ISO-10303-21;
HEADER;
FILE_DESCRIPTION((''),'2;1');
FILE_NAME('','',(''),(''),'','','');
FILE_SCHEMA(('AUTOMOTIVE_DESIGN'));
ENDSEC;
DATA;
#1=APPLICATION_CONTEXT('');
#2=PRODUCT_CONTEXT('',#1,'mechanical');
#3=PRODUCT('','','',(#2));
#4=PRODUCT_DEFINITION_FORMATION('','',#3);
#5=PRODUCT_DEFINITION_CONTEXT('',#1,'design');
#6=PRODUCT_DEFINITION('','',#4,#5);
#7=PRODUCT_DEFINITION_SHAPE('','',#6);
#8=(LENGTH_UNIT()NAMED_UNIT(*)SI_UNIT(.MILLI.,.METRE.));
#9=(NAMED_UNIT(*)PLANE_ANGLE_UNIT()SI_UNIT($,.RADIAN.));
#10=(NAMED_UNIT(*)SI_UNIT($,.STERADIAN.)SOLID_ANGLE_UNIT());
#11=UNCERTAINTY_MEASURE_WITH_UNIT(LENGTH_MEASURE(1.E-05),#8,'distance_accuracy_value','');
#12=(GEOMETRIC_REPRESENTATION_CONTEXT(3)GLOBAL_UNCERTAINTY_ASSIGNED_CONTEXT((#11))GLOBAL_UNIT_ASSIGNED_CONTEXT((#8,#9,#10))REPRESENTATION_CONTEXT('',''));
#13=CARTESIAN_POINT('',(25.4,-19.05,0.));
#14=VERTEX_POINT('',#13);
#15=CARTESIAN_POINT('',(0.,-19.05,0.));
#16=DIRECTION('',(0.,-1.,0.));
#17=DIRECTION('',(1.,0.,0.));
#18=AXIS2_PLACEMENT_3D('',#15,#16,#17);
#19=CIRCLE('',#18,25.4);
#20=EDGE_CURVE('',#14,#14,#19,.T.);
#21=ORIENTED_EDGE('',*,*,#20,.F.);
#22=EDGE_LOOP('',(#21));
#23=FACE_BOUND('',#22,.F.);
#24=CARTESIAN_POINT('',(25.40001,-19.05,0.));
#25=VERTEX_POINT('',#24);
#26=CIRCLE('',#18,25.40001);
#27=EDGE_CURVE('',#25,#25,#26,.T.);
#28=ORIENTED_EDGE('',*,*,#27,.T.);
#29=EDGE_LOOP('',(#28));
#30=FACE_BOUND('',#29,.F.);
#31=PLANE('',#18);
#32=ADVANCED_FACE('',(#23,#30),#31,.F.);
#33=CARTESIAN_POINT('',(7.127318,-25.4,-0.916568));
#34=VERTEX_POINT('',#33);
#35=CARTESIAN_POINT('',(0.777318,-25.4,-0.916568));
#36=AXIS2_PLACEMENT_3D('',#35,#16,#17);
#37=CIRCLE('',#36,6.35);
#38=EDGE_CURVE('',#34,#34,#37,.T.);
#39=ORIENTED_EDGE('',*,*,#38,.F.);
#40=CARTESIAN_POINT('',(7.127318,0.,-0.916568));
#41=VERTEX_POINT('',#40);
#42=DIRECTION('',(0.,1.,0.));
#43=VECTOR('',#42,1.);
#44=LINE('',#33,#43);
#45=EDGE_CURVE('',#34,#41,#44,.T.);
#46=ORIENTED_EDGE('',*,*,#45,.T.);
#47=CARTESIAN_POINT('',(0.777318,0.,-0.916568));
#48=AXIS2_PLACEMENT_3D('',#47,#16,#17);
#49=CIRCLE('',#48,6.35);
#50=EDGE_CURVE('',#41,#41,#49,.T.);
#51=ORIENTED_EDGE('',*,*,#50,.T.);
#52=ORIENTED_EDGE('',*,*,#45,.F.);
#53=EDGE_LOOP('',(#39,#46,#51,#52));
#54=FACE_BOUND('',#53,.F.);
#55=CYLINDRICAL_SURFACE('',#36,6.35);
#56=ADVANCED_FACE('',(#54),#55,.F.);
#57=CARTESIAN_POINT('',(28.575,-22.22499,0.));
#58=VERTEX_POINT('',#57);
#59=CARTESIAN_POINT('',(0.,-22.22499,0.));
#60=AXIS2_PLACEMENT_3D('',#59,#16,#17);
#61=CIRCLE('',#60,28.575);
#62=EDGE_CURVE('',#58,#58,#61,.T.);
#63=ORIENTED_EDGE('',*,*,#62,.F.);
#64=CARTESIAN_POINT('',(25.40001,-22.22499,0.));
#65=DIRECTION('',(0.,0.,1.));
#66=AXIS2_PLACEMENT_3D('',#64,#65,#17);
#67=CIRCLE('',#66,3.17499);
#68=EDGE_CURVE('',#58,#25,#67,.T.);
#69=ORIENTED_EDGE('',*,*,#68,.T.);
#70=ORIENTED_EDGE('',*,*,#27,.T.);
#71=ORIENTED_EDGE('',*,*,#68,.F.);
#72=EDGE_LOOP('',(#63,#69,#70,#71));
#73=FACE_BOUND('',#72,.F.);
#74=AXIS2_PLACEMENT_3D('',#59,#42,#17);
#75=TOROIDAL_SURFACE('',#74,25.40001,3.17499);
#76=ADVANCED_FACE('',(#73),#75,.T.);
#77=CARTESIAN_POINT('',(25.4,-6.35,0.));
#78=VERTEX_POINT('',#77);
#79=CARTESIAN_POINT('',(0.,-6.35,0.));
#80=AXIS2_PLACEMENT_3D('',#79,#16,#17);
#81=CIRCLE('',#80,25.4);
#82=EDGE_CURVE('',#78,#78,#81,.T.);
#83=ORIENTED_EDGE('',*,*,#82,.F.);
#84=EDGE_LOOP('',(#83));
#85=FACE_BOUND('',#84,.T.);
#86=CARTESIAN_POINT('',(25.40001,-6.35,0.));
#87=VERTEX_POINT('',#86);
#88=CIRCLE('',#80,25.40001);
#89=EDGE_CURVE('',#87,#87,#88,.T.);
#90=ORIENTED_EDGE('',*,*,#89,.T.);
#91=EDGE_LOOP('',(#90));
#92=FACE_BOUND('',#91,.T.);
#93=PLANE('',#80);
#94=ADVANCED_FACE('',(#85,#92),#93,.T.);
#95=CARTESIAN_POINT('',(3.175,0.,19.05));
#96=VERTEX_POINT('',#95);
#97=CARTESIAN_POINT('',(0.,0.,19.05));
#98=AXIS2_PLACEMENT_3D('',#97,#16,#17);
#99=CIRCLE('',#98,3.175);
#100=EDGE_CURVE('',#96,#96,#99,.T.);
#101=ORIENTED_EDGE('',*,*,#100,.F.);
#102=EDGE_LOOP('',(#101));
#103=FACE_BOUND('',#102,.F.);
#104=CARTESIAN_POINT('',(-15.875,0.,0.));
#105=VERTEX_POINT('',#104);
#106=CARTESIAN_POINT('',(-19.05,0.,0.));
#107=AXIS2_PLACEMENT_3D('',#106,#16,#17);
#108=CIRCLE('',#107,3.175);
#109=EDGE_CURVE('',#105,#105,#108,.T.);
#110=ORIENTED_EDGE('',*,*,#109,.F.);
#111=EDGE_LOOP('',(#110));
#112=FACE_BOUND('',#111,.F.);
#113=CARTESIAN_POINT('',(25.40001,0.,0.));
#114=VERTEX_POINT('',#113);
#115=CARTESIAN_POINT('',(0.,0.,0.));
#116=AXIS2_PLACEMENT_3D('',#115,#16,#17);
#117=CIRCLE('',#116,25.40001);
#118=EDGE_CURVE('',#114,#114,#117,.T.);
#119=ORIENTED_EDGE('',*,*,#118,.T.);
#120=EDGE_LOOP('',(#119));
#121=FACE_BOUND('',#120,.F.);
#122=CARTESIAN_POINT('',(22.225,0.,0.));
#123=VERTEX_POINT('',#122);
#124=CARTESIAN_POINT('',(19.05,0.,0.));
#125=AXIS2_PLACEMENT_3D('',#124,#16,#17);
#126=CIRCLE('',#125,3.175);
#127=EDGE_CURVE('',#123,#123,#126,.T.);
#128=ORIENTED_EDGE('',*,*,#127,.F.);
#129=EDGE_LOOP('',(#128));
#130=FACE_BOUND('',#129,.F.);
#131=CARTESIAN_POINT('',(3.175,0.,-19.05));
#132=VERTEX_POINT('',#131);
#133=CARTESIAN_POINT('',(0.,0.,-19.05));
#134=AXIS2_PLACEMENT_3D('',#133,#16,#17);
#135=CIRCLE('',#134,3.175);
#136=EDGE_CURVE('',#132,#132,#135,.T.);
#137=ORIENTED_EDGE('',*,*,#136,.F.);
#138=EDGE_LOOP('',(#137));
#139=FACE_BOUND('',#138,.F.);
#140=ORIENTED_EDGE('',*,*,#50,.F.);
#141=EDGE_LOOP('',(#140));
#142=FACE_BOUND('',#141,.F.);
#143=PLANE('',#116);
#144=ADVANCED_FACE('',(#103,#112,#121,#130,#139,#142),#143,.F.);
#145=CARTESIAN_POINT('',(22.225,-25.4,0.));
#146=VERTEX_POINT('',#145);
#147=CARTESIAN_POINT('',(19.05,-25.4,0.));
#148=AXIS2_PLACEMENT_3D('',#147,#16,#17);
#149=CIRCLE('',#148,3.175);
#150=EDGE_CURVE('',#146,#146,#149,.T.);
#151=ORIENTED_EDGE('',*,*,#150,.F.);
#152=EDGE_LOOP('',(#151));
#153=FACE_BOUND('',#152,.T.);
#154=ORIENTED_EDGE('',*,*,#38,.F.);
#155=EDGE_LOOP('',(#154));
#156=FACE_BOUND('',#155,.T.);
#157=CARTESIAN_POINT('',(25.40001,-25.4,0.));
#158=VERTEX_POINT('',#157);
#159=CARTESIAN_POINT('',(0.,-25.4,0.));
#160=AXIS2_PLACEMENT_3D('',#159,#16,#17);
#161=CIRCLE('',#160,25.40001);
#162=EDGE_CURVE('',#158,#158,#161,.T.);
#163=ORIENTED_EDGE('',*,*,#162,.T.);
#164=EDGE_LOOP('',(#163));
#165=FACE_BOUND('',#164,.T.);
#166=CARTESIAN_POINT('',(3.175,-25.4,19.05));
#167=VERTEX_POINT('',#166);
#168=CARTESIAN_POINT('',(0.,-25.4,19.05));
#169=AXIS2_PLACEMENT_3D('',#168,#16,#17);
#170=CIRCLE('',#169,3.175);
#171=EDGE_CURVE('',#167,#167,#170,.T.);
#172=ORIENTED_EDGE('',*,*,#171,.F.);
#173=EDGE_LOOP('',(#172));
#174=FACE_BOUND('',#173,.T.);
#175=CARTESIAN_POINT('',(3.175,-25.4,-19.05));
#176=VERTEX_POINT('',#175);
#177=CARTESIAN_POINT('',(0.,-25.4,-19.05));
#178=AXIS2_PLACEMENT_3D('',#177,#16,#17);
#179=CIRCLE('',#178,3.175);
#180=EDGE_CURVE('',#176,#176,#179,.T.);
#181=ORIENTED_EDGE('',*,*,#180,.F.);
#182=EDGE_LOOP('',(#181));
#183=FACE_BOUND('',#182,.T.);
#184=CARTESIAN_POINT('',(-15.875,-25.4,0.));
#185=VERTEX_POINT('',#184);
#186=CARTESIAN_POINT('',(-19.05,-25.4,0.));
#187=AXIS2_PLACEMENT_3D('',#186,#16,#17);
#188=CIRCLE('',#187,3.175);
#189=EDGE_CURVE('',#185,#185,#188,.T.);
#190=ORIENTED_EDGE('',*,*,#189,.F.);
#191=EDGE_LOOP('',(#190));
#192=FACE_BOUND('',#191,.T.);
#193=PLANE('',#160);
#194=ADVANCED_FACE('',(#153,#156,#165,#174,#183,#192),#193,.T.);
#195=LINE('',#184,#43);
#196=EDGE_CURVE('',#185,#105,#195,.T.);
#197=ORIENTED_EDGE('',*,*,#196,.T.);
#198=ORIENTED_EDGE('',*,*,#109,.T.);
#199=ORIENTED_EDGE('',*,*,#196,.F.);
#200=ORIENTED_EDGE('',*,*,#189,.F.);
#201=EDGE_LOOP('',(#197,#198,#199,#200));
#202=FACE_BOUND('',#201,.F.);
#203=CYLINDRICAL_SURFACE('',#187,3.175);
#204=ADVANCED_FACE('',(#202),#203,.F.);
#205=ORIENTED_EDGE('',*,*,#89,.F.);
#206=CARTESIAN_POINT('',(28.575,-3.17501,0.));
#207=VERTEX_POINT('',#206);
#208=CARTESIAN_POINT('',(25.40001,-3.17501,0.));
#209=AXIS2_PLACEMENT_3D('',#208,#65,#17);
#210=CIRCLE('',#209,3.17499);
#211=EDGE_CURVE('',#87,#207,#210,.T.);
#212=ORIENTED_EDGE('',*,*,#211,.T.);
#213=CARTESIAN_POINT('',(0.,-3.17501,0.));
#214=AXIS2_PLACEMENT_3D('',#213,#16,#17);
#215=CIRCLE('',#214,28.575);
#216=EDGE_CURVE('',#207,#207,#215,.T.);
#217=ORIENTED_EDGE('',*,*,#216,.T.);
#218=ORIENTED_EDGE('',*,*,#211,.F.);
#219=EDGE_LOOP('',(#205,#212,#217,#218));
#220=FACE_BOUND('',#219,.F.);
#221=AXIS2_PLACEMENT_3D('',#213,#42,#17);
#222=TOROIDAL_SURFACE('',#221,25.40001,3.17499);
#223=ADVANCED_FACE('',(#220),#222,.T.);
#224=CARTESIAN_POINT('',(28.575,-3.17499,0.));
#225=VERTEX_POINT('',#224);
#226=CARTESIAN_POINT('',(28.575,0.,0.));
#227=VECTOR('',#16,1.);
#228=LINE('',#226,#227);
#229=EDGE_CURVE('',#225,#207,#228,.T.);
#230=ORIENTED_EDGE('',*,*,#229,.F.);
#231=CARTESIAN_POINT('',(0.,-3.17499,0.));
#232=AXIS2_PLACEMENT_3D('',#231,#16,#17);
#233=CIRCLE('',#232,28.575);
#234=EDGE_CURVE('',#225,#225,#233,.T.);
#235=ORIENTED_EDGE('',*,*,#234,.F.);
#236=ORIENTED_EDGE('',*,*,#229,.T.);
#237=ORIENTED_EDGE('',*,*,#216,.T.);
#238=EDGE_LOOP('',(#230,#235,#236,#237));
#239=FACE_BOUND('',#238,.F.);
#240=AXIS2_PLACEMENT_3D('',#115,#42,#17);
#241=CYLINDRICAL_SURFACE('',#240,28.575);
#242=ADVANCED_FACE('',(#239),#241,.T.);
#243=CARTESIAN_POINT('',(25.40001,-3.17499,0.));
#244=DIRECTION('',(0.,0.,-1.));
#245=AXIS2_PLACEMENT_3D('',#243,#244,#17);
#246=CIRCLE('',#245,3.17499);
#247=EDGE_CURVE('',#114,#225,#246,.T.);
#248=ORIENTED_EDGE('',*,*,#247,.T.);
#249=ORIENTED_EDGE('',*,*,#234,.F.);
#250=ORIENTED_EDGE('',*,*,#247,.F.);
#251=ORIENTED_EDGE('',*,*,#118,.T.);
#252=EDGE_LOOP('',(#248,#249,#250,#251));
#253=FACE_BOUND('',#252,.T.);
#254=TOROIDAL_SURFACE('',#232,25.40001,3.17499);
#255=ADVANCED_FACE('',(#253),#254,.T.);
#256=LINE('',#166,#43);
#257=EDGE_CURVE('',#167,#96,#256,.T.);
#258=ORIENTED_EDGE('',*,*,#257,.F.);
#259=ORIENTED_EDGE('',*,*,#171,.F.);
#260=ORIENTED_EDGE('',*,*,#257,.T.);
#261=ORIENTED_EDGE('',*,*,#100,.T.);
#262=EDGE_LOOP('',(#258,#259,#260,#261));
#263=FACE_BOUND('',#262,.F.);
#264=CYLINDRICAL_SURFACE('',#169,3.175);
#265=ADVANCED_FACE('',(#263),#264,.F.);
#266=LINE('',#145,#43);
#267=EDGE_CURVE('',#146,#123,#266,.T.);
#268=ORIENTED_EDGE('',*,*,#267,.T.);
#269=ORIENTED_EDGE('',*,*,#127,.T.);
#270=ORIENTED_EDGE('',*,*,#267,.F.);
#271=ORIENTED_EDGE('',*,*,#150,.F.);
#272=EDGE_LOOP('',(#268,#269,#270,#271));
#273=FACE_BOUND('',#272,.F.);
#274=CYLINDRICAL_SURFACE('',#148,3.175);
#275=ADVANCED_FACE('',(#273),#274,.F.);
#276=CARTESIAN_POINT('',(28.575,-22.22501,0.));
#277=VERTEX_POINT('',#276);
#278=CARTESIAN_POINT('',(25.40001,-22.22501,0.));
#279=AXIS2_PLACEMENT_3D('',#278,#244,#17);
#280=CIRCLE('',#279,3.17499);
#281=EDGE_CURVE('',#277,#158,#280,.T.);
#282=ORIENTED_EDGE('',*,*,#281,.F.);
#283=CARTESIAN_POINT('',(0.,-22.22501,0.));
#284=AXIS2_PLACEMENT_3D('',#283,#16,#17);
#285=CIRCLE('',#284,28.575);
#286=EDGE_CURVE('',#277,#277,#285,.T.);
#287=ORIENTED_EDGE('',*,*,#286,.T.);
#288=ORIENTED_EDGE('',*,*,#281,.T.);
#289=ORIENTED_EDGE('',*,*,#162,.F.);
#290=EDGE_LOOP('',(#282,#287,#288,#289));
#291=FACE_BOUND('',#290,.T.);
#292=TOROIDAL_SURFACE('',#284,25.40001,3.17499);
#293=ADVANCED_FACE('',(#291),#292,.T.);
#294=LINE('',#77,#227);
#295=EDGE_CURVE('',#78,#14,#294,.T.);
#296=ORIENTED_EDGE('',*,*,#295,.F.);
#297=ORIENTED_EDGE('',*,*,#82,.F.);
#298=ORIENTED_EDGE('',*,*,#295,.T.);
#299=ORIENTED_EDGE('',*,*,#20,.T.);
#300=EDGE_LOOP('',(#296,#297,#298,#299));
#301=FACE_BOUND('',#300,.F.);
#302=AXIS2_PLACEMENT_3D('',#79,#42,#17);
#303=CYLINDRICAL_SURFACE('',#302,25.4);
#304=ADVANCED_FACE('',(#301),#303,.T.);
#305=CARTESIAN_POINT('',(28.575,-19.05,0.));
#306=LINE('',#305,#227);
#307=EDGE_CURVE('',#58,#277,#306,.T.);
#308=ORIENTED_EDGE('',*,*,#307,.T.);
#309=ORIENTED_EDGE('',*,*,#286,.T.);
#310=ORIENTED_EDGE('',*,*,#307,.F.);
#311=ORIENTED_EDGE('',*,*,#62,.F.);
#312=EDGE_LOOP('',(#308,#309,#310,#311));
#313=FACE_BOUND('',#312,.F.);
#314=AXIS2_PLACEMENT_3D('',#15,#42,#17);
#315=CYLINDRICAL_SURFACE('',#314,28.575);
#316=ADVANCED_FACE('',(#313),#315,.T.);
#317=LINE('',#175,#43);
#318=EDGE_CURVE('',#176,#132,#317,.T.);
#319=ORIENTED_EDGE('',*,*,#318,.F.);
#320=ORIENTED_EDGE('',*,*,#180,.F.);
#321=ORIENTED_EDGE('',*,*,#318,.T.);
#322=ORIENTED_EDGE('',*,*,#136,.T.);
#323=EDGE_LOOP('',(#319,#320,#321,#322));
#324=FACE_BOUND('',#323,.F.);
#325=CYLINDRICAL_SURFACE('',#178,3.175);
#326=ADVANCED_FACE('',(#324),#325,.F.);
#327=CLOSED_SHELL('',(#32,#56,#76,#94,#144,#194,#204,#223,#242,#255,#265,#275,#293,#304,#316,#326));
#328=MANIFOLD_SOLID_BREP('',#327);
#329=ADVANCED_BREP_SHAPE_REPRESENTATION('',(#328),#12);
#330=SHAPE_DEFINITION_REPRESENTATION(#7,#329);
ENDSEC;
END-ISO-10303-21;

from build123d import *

# Parameters (mm, degrees)
F0_R      = 28.575
F1_DEPTH  = 6.35
F2_R      = 25.4
F3_DEPTH  = 12.7
F4_R      = 28.575
F5_DEPTH  = 6.35
F6_R      = 3.175
F7_DEPTH  = 25.401
F8_R      = 3.17499
F9_R      = 6.35
F10_DEPTH = 25.401


# Not quite as in the source:
# - a fillet or chamfer is up to 0.001 mm smaller than in the source, because OpenCascade refuses the exact size


with BuildPart() as f1:
    # F0 (on Front) → F1 (new body)
    with BuildSketch(Plane.XZ):
        Circle(F0_R)
    extrude(amount=F1_DEPTH)

    # F2 (on face) → F3 (join)
    with BuildSketch(Plane.XZ.offset(6.35)):
        Circle(F2_R)
    extrude(amount=F3_DEPTH)

    # F4 (on face) → F5 (join)
    with BuildSketch(Plane.XZ.offset(19.05)):
        Circle(F4_R)
    extrude(amount=F5_DEPTH)

    # F6 (on face) → F7 (cut, through all)
    with BuildSketch(Plane.XZ.offset(25.4)):
        with Locations((0, 19.05)):
            Circle(F6_R)
        with Locations((19.05, 0)):
            Circle(F6_R)
        with Locations((0, -19.05)):
            Circle(F6_R)
        with Locations((-19.05, 0)):
            Circle(F6_R)
    extrude(amount=-F7_DEPTH, mode=Mode.SUBTRACT)

    # F8 (radius 3.175 in the source; OpenCascade refuses exactly that, so slightly less here)
    f8_edges = [f1.edges().sort_by_distance(p)[0] for p in [
        (-28.575, -25.4, 0),
        (-28.575, -19.05, 0),
        (-28.575, -6.35, 0),
        (-28.575, 0, 0),
    ]]
    fillet(f8_edges, radius=F8_R)

    # F9 (on face) → F10 (cut, through all)
    with BuildSketch(Plane.XZ.offset(25.4)):
        with Locations((0.7773180259, -0.9165679221)):
            Circle(F9_R)
    extrude(amount=-F10_DEPTH, mode=Mode.SUBTRACT)


solid = f1.part
